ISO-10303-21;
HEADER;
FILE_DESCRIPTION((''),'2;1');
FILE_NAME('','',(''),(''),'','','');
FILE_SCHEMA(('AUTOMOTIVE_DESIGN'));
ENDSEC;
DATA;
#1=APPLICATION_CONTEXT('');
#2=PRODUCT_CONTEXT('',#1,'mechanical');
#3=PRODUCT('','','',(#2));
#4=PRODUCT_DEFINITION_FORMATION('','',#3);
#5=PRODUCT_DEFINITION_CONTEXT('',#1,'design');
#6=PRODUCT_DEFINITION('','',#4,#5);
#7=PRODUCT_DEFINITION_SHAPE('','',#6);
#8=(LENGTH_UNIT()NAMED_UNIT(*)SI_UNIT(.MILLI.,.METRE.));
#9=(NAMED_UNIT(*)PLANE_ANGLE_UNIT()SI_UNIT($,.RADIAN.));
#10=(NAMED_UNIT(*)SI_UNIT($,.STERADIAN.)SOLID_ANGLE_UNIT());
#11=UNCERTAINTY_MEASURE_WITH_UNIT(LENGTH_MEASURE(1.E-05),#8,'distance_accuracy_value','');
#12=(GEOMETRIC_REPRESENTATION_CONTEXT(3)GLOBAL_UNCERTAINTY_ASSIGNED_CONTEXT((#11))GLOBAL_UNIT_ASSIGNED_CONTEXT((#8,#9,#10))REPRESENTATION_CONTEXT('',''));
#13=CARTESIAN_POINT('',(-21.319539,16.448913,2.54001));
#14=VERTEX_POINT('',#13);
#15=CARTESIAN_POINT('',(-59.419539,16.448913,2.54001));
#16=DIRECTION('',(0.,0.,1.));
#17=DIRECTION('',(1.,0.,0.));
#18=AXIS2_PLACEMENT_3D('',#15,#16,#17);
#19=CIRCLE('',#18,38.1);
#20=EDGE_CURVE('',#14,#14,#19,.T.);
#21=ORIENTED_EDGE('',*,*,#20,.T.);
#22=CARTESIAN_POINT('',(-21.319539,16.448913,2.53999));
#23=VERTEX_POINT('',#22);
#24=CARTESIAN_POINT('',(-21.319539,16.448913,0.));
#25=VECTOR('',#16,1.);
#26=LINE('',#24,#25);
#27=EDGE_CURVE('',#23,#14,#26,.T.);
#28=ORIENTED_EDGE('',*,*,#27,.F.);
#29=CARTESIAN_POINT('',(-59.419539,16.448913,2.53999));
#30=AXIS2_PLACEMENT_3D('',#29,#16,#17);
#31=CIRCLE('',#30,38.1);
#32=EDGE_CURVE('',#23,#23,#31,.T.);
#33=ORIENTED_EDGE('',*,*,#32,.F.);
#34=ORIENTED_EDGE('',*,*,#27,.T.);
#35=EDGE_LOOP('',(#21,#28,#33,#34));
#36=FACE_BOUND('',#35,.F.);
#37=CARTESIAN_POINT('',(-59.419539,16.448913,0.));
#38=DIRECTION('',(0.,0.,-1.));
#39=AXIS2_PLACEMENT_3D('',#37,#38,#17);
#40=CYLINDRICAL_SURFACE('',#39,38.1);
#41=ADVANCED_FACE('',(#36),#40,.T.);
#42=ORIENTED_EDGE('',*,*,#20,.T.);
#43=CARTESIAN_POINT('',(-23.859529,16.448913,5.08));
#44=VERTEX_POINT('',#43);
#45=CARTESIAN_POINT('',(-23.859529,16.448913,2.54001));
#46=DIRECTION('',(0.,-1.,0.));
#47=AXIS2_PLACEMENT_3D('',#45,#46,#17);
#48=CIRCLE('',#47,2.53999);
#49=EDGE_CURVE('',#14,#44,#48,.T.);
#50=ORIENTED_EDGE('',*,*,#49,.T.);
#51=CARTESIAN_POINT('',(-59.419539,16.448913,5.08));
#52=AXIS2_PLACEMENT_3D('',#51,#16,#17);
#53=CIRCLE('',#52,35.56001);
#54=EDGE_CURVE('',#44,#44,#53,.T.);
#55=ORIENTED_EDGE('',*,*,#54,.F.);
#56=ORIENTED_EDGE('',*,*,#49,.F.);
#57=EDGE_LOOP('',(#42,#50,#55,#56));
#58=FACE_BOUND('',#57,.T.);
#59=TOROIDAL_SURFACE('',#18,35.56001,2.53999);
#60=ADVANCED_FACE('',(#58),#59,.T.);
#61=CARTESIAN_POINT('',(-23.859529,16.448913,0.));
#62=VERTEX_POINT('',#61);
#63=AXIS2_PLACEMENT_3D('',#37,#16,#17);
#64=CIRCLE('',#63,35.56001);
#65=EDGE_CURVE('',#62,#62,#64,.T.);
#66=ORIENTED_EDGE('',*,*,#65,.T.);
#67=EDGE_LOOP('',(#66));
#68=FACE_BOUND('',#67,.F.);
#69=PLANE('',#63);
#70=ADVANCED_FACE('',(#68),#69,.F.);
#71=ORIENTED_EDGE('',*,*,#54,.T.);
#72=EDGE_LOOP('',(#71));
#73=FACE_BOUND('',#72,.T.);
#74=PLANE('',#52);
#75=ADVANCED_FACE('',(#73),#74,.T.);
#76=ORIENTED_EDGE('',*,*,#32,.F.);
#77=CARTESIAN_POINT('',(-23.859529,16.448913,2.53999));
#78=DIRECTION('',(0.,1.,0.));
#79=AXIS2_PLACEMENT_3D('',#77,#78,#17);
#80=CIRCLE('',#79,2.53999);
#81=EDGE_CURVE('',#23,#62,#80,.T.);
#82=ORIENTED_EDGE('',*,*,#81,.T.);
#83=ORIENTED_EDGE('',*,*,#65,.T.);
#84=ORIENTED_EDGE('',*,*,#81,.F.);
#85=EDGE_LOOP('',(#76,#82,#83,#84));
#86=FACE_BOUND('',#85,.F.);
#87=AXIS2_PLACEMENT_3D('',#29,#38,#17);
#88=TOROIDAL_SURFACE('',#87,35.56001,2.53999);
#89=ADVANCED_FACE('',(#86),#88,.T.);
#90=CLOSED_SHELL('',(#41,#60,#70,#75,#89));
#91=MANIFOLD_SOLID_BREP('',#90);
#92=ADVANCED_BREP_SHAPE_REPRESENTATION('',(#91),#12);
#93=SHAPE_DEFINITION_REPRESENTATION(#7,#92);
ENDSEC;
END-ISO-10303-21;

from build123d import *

# Parameters (mm, degrees)
F0_R     = 38.1
F1_DEPTH = 5.08
F2_R     = 2.53999


# Not quite as in the source:
# - a fillet or chamfer is up to 0.001 mm smaller than in the source, because OpenCascade refuses the exact size


with BuildPart() as f1:
    # F0 (on Top) → F1 (new body)
    with BuildSketch(Plane.XY):
        with Locations((-59.4195388258, 16.4489131421)):
            Circle(F0_R)
    extrude(amount=F1_DEPTH)

    # F2 (radius 2.54 in the source; OpenCascade refuses exactly that, so slightly less here)
    f2_edges = [f1.edges().sort_by_distance(p)[0] for p in [
        (-97.519539, 16.448913, 0),
        (-97.519539, 16.448913, 5.08),
    ]]
    fillet(f2_edges, radius=F2_R)


solid = f1.part
